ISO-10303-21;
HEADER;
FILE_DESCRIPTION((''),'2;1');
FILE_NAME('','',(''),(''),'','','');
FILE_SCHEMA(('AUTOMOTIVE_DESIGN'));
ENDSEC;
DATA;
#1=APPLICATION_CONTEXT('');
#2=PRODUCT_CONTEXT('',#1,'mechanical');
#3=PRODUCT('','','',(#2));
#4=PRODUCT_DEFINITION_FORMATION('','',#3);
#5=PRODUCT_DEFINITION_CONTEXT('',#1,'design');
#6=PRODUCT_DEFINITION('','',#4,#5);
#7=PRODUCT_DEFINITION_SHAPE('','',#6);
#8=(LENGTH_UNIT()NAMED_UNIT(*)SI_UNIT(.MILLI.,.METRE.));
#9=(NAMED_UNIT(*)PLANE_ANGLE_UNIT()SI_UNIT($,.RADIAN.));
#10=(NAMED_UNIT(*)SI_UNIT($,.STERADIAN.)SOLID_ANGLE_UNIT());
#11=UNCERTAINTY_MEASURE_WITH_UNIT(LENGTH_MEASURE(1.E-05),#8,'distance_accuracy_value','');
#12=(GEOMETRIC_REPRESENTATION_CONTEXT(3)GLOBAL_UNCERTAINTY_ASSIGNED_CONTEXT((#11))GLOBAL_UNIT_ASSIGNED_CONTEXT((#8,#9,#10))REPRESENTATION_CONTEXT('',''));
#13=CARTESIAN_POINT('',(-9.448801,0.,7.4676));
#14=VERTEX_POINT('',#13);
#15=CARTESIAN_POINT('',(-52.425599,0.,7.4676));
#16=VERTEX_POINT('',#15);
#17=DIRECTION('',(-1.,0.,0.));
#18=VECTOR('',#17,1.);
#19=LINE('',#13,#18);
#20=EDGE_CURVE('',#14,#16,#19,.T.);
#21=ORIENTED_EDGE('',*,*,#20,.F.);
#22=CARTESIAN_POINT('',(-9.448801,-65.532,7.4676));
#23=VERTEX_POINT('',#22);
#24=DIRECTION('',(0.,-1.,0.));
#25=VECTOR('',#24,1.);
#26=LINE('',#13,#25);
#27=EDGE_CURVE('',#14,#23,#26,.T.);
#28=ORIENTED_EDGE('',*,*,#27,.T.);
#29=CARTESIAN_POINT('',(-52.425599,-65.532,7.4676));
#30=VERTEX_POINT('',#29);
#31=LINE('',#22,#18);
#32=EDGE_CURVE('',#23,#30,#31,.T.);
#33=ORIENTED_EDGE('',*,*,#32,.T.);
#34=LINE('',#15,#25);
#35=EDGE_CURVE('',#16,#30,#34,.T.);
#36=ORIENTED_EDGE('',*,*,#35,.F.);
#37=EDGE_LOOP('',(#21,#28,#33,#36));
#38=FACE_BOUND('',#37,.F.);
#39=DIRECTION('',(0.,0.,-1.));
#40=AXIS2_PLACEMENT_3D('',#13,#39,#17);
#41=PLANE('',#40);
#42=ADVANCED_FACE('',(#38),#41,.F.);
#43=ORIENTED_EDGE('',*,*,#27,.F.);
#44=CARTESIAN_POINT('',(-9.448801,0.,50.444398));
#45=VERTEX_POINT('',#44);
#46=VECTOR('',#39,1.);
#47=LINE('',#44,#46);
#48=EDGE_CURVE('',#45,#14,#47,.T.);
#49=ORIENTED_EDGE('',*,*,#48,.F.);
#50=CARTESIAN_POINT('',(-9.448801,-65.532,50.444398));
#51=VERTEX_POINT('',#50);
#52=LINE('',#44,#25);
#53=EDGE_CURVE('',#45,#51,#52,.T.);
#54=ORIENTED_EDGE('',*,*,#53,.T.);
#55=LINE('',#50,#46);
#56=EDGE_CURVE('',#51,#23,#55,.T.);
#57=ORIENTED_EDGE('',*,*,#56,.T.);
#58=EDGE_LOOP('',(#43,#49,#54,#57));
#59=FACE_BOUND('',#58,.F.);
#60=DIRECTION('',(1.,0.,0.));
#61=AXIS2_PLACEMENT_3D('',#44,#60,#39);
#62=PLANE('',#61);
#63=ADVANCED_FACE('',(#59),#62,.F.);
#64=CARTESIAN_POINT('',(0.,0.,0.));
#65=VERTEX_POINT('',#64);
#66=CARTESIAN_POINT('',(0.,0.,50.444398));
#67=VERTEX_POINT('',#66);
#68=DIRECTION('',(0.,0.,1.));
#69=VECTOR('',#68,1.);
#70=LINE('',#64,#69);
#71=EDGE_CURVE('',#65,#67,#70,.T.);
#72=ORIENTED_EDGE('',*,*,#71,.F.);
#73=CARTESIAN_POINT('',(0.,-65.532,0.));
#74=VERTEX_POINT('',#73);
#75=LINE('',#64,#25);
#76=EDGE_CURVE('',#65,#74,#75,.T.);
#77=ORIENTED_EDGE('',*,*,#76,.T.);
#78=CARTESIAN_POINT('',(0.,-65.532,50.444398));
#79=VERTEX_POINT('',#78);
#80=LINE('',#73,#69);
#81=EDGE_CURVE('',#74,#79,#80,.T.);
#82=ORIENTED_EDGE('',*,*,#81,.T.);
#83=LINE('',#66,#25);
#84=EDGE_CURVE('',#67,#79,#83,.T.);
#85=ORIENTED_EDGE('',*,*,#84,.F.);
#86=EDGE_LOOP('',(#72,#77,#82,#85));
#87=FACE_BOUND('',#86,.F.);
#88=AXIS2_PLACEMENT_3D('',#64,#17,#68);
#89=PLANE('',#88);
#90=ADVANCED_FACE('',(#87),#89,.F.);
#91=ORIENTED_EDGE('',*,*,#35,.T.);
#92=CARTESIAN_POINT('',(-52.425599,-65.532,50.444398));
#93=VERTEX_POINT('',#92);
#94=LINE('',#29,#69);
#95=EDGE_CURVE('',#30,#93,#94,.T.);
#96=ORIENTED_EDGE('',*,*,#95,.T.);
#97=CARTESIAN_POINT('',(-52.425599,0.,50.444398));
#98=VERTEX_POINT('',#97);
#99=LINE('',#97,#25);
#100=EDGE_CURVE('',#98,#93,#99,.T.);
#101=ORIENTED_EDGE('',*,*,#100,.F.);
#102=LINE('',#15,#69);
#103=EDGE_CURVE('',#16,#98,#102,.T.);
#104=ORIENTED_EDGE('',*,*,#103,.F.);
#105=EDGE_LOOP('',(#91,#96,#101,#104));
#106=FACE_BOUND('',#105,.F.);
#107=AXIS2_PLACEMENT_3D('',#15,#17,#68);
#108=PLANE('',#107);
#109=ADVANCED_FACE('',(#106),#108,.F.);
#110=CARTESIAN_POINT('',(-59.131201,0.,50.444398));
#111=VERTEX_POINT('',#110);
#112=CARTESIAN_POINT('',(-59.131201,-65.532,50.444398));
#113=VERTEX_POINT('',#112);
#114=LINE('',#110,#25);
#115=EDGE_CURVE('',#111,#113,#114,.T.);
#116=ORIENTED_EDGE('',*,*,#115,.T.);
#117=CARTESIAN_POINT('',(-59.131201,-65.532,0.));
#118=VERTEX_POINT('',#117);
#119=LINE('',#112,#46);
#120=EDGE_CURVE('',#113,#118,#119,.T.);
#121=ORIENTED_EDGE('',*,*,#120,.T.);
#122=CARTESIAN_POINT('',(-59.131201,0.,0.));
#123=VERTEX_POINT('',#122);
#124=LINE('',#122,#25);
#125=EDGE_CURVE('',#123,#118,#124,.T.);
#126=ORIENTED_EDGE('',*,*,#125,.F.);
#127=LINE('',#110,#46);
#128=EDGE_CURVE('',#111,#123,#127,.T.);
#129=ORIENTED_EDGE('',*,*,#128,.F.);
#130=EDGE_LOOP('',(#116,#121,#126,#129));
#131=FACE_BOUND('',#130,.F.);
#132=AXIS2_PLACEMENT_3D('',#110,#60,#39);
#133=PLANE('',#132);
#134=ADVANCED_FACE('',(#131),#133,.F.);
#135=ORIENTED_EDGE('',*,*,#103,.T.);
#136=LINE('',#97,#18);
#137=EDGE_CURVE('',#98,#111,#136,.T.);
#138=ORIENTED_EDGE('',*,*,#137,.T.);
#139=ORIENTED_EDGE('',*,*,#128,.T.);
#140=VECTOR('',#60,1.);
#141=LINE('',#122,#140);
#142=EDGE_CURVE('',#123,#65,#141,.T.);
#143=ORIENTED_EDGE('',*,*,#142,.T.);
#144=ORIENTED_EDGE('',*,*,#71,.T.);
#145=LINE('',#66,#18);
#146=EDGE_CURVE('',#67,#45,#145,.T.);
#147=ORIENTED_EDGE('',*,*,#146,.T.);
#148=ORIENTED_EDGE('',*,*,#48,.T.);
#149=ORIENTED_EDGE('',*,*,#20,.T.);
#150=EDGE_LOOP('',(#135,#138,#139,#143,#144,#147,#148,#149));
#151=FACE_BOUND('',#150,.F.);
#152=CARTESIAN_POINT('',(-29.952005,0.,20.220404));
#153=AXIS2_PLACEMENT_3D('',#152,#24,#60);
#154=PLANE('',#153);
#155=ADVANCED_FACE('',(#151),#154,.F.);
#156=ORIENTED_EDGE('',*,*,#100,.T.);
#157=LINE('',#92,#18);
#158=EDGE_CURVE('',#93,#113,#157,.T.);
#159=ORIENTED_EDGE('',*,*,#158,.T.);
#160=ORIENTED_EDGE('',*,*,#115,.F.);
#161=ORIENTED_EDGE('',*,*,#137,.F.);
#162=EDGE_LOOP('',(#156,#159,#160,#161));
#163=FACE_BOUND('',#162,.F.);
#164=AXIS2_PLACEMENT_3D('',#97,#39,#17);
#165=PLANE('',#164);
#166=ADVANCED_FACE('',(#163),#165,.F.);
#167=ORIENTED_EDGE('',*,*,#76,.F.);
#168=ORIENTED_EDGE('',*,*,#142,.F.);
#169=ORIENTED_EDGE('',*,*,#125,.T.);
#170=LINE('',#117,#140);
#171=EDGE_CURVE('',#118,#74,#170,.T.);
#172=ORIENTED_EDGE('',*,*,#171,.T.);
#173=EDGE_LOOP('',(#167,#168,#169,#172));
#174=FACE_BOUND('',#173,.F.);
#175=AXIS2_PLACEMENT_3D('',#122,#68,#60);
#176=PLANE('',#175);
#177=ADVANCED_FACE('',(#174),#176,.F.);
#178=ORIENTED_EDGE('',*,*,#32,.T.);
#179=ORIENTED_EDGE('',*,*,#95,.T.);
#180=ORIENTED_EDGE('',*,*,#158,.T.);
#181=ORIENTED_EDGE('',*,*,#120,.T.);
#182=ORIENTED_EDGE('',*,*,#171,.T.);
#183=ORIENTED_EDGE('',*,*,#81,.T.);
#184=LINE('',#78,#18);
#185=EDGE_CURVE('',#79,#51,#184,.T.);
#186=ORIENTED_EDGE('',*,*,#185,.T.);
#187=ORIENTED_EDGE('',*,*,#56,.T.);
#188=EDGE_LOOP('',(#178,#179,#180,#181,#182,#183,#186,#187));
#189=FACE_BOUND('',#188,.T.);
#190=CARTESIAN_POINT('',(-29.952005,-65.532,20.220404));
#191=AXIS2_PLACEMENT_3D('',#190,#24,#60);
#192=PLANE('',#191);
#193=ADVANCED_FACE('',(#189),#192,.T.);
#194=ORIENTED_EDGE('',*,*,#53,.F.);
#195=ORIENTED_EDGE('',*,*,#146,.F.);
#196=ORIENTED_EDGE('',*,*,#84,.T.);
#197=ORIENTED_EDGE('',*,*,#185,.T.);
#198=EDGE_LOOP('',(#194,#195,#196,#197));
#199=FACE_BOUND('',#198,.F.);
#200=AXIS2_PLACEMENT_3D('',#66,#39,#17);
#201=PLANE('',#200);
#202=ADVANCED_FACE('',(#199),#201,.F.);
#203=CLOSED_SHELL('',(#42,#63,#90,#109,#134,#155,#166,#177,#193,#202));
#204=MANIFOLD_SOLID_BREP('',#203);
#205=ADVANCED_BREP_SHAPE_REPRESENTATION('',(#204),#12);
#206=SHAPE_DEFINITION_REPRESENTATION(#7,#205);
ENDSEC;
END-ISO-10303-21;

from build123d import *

# Parameters (mm, degrees)
F1_DEPTH = 65.532


# Not quite as in the source:
# - a feature names something its author has since deleted; it is built from what else it names


with BuildPart() as f1:
    # F0 (on Front) → F1 (new body)
    with BuildSketch(Plane.XZ):
        Polygon((-52.4255991913, 50.4443980753), (-59.1312013566, 50.4443980753), (-59.1312013566, 0), (0, 0), (0, 50.4443980753), (-9.4488011673, 50.4443980753), (-9.4488011673, 7.4676000513), (-52.4255991913, 7.4676000513), align=None)
    extrude(amount=F1_DEPTH)


solid = f1.part
